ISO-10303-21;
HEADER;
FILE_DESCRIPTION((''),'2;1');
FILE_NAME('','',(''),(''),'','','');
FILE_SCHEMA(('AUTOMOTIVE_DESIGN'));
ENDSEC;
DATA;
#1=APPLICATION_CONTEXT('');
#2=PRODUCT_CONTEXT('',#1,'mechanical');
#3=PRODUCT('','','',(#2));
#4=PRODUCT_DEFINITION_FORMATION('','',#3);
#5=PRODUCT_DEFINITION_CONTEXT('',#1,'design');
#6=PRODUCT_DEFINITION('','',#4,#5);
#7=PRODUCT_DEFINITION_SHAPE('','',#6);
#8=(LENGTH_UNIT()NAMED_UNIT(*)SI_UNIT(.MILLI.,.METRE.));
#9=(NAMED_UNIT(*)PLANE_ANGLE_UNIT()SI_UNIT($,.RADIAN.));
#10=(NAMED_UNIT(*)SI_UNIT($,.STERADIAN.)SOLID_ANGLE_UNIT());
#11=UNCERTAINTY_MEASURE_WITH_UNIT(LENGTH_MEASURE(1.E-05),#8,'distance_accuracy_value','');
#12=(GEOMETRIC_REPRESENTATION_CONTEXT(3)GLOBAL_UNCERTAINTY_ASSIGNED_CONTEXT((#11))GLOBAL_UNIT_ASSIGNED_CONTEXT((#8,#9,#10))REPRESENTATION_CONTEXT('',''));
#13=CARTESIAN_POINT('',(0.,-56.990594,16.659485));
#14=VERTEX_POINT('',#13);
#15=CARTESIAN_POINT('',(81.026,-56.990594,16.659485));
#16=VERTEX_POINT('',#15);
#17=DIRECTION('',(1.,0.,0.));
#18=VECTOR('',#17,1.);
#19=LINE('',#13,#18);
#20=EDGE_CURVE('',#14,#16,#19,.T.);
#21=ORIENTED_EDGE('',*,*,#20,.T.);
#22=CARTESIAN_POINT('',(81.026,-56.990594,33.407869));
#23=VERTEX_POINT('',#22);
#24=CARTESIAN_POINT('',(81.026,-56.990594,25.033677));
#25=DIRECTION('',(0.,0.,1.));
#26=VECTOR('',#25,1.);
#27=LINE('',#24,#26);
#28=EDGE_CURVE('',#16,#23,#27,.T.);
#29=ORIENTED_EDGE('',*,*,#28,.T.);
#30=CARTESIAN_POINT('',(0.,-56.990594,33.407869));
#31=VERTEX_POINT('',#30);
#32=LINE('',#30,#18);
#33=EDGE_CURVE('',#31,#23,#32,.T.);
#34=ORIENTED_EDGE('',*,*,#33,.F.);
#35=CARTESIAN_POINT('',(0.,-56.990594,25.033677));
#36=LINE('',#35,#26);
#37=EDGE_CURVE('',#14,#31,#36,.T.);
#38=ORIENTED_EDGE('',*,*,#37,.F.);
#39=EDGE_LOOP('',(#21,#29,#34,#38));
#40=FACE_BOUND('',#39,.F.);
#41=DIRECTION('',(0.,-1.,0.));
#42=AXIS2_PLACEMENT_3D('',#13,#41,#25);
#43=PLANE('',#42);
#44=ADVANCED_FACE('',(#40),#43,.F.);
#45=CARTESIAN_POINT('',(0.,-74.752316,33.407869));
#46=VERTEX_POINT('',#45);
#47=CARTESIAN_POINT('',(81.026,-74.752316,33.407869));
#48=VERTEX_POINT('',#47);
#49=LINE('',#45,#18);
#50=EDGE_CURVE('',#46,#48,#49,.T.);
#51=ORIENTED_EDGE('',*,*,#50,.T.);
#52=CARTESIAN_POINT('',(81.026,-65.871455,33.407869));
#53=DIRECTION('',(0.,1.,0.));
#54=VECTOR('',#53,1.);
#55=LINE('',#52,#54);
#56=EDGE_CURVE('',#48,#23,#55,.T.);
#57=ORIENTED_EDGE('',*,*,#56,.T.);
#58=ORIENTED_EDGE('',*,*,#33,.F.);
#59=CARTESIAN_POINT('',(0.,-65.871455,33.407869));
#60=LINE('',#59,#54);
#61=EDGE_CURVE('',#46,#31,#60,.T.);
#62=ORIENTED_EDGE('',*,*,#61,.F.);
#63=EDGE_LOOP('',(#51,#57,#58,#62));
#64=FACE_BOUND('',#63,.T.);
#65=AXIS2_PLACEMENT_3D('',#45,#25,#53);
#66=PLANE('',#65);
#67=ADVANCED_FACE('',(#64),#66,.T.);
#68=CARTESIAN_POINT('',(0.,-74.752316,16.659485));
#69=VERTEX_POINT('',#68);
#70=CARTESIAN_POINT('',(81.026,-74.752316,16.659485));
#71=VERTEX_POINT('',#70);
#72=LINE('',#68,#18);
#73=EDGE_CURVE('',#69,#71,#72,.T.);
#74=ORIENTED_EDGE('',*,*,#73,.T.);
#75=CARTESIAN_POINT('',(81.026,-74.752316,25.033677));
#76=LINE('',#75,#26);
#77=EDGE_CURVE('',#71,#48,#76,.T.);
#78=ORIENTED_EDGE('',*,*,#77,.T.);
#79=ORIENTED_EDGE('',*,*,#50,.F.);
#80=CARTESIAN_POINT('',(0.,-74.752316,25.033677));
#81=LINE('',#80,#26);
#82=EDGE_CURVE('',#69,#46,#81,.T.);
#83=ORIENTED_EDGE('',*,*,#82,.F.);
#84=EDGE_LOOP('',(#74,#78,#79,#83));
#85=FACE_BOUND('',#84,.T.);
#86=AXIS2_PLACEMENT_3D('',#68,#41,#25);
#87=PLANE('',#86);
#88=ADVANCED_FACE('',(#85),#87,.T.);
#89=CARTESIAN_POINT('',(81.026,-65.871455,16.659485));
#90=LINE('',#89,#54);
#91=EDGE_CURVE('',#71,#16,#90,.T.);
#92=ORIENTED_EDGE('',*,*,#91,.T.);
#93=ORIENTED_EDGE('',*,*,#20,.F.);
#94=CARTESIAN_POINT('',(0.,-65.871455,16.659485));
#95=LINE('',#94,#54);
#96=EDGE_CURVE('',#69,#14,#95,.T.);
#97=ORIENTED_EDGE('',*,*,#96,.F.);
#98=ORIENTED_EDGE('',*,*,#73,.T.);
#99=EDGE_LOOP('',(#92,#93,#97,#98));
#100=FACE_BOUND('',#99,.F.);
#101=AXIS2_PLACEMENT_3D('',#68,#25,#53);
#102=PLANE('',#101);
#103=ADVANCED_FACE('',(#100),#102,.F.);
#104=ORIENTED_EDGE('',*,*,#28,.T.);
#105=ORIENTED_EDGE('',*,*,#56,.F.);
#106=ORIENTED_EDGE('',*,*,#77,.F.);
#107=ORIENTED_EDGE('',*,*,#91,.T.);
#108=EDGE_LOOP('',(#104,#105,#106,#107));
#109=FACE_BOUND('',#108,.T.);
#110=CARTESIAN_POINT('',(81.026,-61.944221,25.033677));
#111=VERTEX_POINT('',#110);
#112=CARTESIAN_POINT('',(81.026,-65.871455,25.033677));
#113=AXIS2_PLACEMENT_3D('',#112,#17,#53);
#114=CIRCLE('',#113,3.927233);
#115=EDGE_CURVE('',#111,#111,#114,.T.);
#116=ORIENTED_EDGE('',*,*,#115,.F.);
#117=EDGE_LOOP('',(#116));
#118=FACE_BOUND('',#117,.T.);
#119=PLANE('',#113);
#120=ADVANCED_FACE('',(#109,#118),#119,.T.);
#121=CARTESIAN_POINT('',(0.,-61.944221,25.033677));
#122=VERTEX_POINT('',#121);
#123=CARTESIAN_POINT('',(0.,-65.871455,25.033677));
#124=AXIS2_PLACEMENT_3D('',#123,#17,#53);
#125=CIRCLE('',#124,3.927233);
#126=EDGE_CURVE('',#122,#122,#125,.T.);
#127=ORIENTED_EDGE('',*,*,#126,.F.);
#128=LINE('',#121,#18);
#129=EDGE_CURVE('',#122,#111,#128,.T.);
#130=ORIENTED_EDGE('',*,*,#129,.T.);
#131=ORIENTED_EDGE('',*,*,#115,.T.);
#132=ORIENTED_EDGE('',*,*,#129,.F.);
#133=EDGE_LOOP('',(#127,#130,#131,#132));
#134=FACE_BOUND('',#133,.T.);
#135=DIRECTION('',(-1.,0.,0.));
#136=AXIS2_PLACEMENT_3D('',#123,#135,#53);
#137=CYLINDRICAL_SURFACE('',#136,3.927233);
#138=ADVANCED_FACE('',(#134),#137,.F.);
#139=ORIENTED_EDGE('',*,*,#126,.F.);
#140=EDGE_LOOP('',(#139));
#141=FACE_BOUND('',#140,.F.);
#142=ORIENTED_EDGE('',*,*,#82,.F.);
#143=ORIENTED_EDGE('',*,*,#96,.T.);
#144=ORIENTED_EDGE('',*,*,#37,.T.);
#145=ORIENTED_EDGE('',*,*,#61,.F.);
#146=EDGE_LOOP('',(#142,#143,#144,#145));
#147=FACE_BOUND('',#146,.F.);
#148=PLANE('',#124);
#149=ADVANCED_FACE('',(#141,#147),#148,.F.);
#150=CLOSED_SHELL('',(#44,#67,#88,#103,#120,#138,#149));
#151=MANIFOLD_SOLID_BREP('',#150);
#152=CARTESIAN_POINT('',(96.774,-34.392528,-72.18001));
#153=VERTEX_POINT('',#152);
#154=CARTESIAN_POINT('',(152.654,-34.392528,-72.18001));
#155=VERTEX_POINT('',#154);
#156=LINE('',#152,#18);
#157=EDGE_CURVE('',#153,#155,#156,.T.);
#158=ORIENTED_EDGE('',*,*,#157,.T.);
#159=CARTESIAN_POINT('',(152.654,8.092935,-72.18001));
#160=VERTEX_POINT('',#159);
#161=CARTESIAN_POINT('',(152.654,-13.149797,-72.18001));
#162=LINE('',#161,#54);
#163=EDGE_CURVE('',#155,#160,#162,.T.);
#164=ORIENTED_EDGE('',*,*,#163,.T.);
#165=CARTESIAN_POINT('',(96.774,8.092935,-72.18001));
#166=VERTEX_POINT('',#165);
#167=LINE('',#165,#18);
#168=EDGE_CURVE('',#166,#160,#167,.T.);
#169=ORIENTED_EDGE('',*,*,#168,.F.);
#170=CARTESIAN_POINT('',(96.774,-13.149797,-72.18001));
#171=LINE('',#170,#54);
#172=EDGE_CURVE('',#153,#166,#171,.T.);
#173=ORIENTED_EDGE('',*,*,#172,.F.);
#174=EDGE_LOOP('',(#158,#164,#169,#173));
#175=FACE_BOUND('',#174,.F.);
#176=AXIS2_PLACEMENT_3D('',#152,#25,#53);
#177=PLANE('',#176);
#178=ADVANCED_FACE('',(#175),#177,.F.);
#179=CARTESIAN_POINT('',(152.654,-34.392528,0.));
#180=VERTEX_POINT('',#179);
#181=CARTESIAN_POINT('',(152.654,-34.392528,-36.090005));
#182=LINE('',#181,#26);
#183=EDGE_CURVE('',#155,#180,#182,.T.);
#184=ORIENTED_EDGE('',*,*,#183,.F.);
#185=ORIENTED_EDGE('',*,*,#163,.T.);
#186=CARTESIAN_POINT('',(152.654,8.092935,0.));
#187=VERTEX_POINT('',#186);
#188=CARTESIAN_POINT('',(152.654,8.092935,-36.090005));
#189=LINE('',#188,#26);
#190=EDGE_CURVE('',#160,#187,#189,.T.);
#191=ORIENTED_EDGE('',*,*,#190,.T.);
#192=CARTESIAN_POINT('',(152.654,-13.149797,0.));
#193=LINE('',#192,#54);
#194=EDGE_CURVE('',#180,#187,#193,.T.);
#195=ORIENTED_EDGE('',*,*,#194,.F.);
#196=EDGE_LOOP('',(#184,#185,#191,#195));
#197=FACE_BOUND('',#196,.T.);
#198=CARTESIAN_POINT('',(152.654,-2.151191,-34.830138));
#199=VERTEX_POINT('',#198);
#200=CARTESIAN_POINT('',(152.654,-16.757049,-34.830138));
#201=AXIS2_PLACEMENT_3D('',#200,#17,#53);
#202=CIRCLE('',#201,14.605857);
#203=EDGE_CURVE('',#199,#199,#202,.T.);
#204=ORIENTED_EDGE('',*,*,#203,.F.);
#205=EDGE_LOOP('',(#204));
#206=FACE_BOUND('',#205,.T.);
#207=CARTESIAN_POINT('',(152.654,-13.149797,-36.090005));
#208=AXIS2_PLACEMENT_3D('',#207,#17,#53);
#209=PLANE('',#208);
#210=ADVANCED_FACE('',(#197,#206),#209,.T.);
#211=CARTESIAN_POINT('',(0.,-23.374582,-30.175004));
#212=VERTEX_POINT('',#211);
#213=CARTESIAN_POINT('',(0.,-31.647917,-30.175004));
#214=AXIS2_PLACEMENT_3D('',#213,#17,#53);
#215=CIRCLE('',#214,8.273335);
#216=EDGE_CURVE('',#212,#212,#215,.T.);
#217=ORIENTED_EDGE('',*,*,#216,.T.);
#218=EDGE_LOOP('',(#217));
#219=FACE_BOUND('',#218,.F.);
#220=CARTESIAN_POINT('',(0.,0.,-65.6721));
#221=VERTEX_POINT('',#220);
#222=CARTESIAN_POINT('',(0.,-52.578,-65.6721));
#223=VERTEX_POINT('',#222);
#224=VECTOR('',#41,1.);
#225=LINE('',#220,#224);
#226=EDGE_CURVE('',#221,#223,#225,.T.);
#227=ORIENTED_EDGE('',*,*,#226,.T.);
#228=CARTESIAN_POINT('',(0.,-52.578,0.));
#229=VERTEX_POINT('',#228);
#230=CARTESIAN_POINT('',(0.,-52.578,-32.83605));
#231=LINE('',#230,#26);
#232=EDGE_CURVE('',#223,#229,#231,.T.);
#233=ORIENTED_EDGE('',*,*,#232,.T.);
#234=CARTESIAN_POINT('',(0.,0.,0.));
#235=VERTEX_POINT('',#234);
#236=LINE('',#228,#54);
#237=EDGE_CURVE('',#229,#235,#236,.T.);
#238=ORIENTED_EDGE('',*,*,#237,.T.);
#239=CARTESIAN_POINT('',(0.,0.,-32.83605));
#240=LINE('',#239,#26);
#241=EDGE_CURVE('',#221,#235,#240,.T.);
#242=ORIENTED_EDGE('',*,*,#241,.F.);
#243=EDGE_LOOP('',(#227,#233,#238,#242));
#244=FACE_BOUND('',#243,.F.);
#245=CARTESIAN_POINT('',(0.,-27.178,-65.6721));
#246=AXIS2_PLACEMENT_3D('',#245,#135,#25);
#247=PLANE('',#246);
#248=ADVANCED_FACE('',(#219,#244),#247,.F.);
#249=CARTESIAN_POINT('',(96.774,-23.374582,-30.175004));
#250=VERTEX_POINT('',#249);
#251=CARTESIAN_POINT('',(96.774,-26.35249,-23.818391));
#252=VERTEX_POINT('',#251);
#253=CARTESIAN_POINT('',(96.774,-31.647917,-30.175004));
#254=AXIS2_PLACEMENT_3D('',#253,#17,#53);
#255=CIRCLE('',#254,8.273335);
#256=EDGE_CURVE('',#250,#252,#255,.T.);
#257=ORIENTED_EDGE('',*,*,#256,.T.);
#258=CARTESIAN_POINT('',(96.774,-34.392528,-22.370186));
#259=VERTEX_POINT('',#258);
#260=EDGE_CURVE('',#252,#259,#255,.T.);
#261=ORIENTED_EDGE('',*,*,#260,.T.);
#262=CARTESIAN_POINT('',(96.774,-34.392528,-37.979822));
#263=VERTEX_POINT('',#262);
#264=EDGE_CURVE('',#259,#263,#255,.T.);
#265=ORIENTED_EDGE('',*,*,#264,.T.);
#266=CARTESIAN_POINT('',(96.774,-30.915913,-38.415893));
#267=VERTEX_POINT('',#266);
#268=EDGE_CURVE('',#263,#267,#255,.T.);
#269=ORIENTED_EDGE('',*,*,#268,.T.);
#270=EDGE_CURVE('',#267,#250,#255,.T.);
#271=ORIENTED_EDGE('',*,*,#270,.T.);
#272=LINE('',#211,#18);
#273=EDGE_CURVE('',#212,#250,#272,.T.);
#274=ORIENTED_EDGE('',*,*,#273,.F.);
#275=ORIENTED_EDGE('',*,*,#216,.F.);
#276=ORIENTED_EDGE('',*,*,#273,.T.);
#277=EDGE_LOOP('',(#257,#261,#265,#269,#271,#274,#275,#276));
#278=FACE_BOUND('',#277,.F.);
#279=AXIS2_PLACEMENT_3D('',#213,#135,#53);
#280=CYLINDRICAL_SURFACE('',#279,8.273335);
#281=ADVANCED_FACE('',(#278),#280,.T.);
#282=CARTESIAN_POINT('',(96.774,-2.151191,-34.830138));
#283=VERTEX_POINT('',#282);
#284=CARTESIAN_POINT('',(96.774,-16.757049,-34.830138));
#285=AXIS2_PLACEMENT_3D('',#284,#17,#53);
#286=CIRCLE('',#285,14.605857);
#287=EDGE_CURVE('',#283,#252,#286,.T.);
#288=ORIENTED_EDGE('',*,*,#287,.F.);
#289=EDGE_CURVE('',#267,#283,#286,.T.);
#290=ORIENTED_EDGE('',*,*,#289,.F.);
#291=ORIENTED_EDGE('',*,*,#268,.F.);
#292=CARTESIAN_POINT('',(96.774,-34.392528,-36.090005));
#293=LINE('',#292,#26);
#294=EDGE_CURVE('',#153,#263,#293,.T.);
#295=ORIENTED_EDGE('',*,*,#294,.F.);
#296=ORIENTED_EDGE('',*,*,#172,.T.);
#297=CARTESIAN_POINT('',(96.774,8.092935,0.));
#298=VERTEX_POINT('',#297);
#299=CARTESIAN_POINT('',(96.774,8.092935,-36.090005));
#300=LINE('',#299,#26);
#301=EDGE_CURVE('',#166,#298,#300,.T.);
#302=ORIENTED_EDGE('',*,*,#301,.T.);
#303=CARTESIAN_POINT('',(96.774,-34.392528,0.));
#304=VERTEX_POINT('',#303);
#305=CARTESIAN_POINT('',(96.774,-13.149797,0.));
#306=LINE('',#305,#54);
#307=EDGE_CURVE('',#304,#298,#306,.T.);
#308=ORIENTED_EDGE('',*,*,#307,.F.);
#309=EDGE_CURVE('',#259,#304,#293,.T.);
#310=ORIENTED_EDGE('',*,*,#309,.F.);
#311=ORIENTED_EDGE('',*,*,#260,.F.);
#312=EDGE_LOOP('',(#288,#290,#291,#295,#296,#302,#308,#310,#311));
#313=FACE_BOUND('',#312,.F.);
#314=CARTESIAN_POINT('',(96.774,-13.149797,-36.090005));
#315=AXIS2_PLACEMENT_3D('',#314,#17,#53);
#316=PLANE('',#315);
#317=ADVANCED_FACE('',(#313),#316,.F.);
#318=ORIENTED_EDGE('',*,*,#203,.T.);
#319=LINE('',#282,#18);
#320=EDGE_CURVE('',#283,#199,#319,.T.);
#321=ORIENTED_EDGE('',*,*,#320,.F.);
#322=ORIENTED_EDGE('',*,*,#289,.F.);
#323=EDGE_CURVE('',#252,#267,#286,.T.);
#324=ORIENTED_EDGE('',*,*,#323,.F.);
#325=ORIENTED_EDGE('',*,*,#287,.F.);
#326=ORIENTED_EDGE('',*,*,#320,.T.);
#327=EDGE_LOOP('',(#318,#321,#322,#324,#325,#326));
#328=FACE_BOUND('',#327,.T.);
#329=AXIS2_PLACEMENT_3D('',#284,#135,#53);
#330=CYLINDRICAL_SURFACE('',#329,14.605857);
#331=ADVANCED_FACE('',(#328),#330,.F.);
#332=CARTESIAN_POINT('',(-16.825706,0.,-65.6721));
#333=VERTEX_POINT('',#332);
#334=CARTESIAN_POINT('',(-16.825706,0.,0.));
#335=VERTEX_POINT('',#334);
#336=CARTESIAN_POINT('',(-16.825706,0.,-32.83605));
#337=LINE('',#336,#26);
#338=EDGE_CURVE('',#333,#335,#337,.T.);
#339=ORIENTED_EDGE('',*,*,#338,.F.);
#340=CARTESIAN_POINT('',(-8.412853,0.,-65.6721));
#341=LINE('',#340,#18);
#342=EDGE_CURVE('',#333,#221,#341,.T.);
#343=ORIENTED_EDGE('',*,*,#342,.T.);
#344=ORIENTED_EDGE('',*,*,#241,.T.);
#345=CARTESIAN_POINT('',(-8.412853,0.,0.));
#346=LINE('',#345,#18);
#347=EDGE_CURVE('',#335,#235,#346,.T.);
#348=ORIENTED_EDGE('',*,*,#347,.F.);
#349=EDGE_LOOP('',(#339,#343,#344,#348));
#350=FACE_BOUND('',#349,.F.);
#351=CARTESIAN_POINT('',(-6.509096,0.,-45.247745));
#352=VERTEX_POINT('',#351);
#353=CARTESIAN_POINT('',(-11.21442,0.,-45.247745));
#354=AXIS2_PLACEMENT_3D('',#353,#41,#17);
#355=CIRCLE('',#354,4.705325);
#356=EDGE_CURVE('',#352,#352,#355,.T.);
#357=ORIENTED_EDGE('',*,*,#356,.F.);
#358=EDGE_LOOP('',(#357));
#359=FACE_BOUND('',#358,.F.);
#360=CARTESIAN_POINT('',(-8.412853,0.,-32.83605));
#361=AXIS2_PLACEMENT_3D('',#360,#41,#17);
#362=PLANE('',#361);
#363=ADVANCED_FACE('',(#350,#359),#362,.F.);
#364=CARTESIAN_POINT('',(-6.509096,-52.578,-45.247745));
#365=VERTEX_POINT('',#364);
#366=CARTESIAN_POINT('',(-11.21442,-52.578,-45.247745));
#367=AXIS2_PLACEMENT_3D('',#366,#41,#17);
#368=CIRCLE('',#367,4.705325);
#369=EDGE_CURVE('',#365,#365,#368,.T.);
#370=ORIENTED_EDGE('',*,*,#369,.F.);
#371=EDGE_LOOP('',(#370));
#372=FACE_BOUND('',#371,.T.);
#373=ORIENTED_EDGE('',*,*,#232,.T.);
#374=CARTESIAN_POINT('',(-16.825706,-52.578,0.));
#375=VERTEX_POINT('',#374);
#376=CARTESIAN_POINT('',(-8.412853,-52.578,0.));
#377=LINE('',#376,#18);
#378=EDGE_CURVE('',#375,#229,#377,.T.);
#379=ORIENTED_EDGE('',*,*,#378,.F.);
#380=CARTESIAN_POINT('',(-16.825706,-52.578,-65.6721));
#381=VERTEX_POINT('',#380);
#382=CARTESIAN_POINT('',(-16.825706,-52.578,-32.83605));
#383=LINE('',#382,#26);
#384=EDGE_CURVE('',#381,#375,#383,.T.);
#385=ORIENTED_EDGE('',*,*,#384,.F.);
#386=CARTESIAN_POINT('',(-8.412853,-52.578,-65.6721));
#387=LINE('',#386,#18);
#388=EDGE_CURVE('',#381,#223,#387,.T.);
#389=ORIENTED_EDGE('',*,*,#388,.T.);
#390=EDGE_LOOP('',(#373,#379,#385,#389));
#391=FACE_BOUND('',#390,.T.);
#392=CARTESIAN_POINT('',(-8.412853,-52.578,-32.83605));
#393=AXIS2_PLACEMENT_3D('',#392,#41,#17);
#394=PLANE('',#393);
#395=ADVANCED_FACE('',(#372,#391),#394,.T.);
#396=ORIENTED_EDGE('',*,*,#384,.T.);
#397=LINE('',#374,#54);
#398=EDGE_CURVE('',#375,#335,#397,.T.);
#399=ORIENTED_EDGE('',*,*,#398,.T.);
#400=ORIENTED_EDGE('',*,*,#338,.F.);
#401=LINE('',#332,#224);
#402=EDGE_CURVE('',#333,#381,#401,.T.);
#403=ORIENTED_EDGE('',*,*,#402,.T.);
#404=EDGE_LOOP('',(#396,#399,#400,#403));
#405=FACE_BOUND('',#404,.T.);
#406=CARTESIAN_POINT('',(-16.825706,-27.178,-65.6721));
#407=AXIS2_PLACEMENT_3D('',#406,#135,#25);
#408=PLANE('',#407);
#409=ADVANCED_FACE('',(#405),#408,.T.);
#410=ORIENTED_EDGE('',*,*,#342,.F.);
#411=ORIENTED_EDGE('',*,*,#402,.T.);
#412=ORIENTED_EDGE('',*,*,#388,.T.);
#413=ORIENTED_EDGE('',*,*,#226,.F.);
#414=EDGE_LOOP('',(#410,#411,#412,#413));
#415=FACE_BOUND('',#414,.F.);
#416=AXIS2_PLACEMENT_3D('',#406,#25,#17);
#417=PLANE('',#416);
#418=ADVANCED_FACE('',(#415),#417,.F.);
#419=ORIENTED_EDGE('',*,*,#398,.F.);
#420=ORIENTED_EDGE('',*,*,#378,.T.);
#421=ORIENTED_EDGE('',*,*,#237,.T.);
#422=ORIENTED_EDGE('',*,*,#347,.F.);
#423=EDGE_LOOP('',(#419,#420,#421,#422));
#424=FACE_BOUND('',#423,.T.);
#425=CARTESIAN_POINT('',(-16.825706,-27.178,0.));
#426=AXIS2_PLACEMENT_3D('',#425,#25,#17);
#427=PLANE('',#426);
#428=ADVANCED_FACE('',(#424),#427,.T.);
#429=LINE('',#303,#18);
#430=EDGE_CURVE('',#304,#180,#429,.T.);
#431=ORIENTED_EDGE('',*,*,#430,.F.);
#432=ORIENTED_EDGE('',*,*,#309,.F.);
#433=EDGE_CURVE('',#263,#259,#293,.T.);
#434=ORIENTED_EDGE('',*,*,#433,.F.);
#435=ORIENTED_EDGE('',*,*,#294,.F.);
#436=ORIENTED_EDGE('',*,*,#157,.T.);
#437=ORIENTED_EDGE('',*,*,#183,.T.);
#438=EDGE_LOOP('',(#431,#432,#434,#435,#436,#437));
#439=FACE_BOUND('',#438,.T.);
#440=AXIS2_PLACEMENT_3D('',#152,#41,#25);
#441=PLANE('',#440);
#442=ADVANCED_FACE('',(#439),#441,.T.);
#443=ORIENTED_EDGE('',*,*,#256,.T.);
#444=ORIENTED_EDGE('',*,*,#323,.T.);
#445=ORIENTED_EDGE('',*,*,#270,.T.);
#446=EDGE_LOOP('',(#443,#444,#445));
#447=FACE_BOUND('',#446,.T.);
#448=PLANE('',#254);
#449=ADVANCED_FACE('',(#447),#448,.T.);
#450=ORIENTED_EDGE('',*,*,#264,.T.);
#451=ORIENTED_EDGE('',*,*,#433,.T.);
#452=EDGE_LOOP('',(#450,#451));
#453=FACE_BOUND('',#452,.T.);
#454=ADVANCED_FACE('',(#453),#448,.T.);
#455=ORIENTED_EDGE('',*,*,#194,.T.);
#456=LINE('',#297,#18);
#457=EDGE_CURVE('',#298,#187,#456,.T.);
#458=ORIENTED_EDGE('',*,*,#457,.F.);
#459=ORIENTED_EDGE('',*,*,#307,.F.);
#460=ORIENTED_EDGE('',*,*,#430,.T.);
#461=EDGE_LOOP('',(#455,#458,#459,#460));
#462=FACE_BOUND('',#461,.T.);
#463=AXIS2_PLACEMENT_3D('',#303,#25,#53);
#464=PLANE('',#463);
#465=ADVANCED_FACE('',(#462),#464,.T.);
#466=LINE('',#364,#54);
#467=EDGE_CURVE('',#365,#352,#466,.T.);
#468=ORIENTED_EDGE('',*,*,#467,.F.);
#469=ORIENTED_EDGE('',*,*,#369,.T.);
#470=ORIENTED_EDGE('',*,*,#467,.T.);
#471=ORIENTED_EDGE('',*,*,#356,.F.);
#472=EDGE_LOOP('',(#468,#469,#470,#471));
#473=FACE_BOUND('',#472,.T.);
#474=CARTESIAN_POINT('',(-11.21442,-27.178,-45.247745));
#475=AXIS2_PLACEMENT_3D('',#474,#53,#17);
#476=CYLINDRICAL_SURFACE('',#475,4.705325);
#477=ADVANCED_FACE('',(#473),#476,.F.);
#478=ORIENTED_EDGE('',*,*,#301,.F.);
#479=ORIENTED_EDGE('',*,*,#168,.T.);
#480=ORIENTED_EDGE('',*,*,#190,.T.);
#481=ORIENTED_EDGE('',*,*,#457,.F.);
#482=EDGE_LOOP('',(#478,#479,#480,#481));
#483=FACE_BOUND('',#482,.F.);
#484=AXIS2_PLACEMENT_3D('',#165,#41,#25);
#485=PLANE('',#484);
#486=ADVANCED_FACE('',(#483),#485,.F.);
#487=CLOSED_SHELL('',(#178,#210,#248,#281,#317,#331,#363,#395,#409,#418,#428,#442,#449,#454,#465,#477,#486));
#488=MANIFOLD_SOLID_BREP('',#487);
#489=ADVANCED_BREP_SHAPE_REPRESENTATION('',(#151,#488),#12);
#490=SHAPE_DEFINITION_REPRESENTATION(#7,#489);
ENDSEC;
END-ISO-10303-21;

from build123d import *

# Parameters (mm, degrees)
F1_W      = 17.7617222071
F1_H      = 16.7483836412
F1_R      = 3.9272334966
F2_DEPTH  = 81.026
F3_W      = 16.8257057667
F3_H      = 65.6720995903
F3_R      = 4.7053245115
F4_DEPTH  = 25.4
F5_W      = 16.8257057667
F5_H      = 65.6720995903
F5_R      = 4.7053245115
F5_R_2    = 3.4049963351
F6_DEPTH  = 1.778
F9_DEPTH  = 25.4
F12_R     = 8.2733352579
F13_DEPTH = 96.774
F14_W     = 42.485463433
F14_H     = 72.1800103784
F14_R     = 14.6058574256
F15_DEPTH = 55.88


# Not quite as in the source:
# - the program builds the solid bodies; features that only make, move or delete a surface that nothing else refers to are left out


with BuildPart() as f2:
    # F1 (on Right) → F2 (new body)
    with BuildSketch(Plane.YZ):
        with Locations((-65.8714547753, 25.0336769968)):
            Rectangle(F1_W, F1_H)
        with Locations((-65.8714547753, 25.0336769968)):
            Circle(F1_R, mode=Mode.SUBTRACT)
    extrude(amount=F2_DEPTH)


with BuildPart() as f4:
    # F3 (on Front) → F4 (new body)
    with BuildSketch(Plane.XZ):
        with Locations((-8.4128528833, -32.8360497952)):
            Rectangle(F3_W, F3_H)
        with Locations((-11.2144201994, -45.2477447689)):
            Circle(F3_R, mode=Mode.SUBTRACT)
    extrude(amount=F4_DEPTH)

    # F5 (on face) → F6 (join)
    with BuildSketch(Plane.XZ.offset(25.4)):
        with Locations((-8.4128528833, -32.8360497952)):
            Rectangle(F5_W, F5_H)
        with Locations((-11.2144201994, -45.2477447689)):
            Circle(F5_R, mode=Mode.SUBTRACT)
        with Locations((-11.8808113039, -30.071657151)):
            Circle(F5_R_2, mode=Mode.SUBTRACT)
        with Locations((-11.8808113039, -30.071657151)):
            Circle(F5_R_2)
    extrude(amount=F6_DEPTH)

    # F9 (add): a face of the model
    f9_faces = [f4.faces().sort_by_distance(p)[0] for p in [
        (-8.2246562992, -27.178, -32.0022884273),
    ]]
    extrude(f9_faces, amount=F9_DEPTH)

    # F12 (on face) → F13 (join)
    with BuildSketch(Plane.YZ):
        with Locations((-31.6479168832, -30.1750041544)):
            Circle(F12_R)
    extrude(amount=F13_DEPTH)

    # F14 (on face) → F15 (join)
    with BuildSketch(Plane.YZ.offset(96.774)):
        with Locations((-13.1497965194, -36.0900051892)):
            Rectangle(F14_W, F14_H)
        with Locations((-16.7570486665, -34.8301380873)):
            Circle(F14_R, mode=Mode.SUBTRACT)
    extrude(amount=F15_DEPTH)


solid = Compound([f2.part, f4.part])
